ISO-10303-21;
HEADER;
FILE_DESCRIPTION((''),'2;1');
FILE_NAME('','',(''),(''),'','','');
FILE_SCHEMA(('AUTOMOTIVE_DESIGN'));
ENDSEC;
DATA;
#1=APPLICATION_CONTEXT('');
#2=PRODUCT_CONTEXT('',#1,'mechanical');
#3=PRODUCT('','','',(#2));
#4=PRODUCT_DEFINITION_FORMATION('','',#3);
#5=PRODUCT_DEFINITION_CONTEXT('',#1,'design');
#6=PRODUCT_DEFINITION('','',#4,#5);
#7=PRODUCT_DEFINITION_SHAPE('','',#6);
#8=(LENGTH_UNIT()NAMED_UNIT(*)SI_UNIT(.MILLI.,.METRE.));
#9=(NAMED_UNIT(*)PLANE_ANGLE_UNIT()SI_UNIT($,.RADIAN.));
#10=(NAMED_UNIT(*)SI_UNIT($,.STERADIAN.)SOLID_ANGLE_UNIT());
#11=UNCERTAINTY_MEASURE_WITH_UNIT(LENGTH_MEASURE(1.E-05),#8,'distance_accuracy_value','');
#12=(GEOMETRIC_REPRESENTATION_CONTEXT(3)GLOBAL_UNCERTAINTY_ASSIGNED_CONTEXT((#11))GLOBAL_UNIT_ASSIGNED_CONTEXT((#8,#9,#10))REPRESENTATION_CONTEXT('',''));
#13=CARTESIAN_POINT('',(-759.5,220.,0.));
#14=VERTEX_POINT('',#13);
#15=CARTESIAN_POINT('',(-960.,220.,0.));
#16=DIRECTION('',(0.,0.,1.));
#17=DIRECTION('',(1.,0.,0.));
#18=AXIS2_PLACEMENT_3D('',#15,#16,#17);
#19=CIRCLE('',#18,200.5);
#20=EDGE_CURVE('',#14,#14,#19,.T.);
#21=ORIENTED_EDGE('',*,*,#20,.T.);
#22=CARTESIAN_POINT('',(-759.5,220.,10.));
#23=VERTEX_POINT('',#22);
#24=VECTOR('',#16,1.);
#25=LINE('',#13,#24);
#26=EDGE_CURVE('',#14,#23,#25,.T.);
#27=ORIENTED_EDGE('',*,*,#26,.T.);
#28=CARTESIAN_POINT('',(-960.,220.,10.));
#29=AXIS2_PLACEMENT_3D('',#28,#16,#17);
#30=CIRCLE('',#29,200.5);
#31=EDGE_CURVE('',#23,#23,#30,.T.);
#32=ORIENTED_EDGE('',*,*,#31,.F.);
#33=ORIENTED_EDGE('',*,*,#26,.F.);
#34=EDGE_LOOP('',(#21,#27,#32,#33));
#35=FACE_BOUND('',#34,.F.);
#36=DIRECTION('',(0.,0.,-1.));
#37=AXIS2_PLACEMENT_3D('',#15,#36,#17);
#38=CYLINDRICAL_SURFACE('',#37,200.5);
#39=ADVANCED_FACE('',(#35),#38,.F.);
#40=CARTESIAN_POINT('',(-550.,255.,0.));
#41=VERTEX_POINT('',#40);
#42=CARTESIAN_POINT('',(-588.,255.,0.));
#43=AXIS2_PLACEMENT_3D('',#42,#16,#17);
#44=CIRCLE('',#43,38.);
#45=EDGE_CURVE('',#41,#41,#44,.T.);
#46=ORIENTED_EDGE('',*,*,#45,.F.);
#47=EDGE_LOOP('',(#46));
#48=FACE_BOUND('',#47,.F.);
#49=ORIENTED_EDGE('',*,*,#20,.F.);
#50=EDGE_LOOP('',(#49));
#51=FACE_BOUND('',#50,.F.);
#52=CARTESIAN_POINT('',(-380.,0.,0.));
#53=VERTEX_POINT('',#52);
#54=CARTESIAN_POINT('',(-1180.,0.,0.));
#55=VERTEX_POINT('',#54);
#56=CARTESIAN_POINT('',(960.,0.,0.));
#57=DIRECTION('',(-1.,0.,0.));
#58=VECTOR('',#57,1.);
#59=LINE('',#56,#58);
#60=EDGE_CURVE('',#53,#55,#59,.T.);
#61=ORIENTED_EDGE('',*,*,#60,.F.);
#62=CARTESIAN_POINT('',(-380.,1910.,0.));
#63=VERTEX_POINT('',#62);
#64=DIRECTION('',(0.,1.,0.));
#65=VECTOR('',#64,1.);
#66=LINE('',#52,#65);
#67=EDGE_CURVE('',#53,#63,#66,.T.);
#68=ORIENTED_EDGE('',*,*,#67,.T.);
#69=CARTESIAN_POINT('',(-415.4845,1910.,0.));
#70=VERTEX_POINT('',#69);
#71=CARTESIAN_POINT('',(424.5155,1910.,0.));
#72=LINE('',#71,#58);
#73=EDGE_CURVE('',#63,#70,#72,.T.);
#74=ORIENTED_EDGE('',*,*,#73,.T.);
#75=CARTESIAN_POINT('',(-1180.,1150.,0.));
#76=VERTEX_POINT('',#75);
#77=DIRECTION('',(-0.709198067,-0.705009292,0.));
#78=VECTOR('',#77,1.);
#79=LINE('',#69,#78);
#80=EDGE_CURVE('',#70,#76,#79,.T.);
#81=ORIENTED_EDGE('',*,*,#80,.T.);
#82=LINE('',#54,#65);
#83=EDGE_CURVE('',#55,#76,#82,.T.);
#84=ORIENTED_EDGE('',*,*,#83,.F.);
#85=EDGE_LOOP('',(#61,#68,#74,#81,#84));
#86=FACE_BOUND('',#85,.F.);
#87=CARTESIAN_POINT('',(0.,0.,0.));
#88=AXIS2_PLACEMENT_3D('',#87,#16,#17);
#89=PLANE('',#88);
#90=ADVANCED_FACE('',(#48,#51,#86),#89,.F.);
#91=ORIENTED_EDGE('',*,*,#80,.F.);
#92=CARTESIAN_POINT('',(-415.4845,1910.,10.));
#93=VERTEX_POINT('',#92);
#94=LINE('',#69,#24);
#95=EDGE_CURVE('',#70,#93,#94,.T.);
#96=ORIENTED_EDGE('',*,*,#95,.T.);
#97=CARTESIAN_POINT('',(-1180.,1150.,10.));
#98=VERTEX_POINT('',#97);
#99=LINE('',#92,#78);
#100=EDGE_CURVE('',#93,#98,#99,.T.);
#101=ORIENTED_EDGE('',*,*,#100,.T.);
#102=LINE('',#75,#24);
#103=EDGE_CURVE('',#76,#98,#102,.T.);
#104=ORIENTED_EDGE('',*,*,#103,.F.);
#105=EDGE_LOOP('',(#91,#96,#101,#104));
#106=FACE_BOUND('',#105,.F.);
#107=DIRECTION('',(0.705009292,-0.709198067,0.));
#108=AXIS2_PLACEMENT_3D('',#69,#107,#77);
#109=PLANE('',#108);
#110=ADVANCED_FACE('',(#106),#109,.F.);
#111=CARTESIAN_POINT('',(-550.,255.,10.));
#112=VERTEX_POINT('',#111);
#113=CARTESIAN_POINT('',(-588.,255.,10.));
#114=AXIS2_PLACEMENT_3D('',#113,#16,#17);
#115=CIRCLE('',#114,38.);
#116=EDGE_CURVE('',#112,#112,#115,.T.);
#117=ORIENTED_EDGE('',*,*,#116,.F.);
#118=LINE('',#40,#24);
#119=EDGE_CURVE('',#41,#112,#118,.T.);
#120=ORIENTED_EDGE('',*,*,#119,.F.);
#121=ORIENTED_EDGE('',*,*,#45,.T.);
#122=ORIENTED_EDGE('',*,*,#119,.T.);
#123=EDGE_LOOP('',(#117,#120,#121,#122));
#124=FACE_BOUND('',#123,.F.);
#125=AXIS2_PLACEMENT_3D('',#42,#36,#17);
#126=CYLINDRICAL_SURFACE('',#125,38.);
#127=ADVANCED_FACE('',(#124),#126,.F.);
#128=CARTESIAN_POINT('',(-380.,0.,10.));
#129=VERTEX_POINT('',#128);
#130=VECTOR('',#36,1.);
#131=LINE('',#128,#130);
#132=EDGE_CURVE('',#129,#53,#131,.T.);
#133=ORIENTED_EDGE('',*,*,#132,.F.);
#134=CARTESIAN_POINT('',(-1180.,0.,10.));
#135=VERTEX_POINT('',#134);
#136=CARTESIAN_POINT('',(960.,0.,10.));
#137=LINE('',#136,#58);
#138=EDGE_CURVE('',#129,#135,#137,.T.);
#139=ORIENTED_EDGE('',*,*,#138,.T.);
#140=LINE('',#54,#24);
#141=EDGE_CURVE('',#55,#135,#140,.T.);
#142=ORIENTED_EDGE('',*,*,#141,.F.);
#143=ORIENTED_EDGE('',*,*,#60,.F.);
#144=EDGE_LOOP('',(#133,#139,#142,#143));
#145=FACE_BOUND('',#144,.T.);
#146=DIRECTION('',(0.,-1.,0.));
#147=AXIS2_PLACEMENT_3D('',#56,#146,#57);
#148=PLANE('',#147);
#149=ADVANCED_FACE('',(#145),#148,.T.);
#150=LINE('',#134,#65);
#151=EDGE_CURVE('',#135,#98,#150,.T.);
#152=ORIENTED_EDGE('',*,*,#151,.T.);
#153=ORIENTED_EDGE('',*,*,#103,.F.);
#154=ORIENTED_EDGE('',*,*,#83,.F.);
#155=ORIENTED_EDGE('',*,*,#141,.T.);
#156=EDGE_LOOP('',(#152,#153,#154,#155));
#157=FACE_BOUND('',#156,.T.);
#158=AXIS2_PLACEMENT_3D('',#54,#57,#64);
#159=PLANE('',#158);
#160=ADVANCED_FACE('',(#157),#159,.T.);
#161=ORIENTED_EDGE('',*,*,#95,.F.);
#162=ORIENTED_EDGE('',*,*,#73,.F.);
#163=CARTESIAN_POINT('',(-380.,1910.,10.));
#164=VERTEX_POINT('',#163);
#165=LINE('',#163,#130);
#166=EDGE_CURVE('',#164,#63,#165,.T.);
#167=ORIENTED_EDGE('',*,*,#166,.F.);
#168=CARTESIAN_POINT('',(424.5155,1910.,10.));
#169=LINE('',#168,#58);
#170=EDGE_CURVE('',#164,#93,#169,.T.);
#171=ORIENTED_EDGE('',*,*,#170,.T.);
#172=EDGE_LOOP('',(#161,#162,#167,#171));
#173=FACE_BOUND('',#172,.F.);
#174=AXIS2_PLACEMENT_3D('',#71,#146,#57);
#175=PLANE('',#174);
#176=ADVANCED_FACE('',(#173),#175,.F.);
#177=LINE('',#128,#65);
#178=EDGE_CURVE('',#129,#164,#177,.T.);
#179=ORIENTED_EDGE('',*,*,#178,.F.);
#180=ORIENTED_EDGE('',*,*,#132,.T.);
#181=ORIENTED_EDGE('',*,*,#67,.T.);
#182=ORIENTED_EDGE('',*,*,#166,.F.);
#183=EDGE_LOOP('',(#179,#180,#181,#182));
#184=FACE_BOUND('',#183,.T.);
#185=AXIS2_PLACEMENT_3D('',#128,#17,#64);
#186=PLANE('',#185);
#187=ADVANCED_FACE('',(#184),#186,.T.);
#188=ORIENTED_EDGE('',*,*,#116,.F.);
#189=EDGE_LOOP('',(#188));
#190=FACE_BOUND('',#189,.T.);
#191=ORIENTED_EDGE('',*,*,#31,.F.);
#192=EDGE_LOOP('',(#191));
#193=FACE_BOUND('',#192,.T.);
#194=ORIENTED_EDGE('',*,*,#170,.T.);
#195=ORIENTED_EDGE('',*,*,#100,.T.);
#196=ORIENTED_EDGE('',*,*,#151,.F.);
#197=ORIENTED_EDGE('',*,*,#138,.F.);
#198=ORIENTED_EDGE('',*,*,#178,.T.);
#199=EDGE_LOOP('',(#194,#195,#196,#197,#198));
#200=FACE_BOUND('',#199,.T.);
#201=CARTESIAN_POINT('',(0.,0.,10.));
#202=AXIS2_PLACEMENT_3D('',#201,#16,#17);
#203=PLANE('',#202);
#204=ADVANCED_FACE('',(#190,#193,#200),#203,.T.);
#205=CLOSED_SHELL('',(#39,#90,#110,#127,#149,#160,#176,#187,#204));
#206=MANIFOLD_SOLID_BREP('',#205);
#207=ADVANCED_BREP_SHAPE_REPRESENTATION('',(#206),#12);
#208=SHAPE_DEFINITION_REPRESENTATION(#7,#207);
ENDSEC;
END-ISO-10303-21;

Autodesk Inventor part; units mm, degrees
ref_plane "YZ Plane" through (0, 0, 0) normal (1, 0, 0) x (0, 1, 0)
ref_plane "XZ Plane" through (0, 0, 0) normal (0, 1, 0) x (-1, 0, 0)
ref_plane "XY Plane" through (0, 0, 0) normal (0, 0, 1) x (1, 0, 0)
sketch "Sketch1" plane through (0, 0, 0) normal (0, 0, 1) x (1, 0, 0)
  line L0 (0, 0) -> (0, 1910) construction
  line L1 (424.5155, 1910) -> (-415.4845, 1910)
  line L2 (-415.4845, 1910) -> (-1180, 1150)
  line L3 (-1180, 0) -> (-1180, 1150)
  line L4 (960, 0) -> (960, 1342.8524)
  line L5 (424.5155, 1910) -> (960, 1342.8524)
  circle A0 centre (0, 950) radius 195 construction
  line L6 (960, 0) -> (-1180, 0)
  circle A1 centre (-960, 220) radius 200.5
  circle A2 centre (-588, 255) radius 38
  circle A3 centre (374.6358, 1277) radius 50
  circle A4 centre (0, 950) radius 155
  point P0 (0, 955)
  dimension "d1" = 840
  dimension "d3" = 1150
  dimension "d11" = 390
  dimension "d12" = 1180
  dimension "d13" = 950
  dimension "d14" = 76
  dimension "d15" = 1910
  dimension "d16" = 255
  dimension "d17" = 220
  dimension "d18" = 401
  dimension "d19" = 220
  dimension "d21" = 1277
  dimension "d22" = 1554.6358
  dimension "d23" = 100
  dimension "d33" = 2140
  dimension "d34" = 494
  dimension "d45" = 310
  dimension "d49" = 372
  dimension "d51" = 780
  dimension "d52" = 1078
extrude "Extrusion1" add sketch "Sketch1" along normal blind 10
sketch "Sketch3" plane through (0, 0, 10) normal (0, 0, 1) x (1, 0, 0)
  line L0 (-400, 950) -> (400, 950) construction
  circle A0 centre (0, 950) radius 155 projected
  circle A1 centre (155, 950) radius 2.5
  circle A2 centre (-155, 950) radius 2.5
  line L1 (132.7592, 870) -> (-132.7592, 870) construction
  circle A3 centre (132.7592, 870) radius 2.5
  circle A4 centre (-132.7592, 870) radius 2.5
  point P0 (0, 0)
  point P1 (-154.9798, 947.5001)
  point P2 (-154.9798, 952.4999)
  point P3 (154.9798, 947.5001)
  point P4 (154.9798, 952.4999)
  point P5 (134.0322, 872.1516)
  point P6 (131.4516, 867.8692)
  dimension "d47" = 5
  dimension "d48" = 80
extrude "Extrusion3" cut sketch "Sketch3" against normal through all contours A0 A1 | A0 A2 | A3 A0 | A4 A0 | A0 A4 picked at (155.7492, 949.3589) picked at (-155.8257, 950.101) picked at (133.5004, 869.6223)
sketch "Sketch4" plane through (0, 0, 10) normal (0, 0, 1) x (1, 0, 0)
  arc A0 (154.9798, 947.5001) -> (154.9798, 952.4999) centre (155, 950) ccw projected
  arc A1 (134.0322, 872.1516) -> (154.9798, 947.5001) centre (0, 950) ccw projected
  arc A2 (131.4516, 867.8692) -> (134.0322, 872.1516) centre (132.7592, 870) ccw projected
  arc A3 (-131.4516, 867.8692) -> (131.4516, 867.8692) centre (0, 950) ccw projected
  arc A4 (-134.0322, 872.1516) -> (-131.4516, 867.8692) centre (-132.7592, 870) ccw projected
  arc A5 (-154.9798, 947.5001) -> (-134.0322, 872.1516) centre (0, 950) ccw projected
  arc A6 (-154.9798, 952.4999) -> (-154.9798, 947.5001) centre (-155, 950) ccw projected
  arc A7 (154.9798, 952.4999) -> (-154.9798, 952.4999) centre (0, 950) ccw projected
  line L0 (960, 1342.8524) -> (424.5155, 1910) projected
  line L1 (424.5155, 1910) -> (-415.4845, 1910) projected
  line L2 (-415.4845, 1910) -> (-1180, 1150) projected
  line L3 (-1180, 1150) -> (-1180, 0) projected
  line L4 (-1180, 0) -> (960, 0) projected
  line L5 (960, 0) -> (960, 1342.8524) projected
  circle A8 centre (374.6358, 1277) radius 50 projected
  circle A9 centre (-588, 255) radius 38 projected
  circle A10 centre (-960, 220) radius 200.5 projected
  line L6 (-380, 0) -> (-380, 1910)
  point P0 (0, 0)
  dimension "d53" = 1340
extrude "Extrusion4" cut sketch "Sketch4" against normal through all contours L5 L4 L6 L1 L0
equation "\"d17\" = d19"
properties part number "ДМФ 014 Стенка Нос ЛЕВ v2.0"
